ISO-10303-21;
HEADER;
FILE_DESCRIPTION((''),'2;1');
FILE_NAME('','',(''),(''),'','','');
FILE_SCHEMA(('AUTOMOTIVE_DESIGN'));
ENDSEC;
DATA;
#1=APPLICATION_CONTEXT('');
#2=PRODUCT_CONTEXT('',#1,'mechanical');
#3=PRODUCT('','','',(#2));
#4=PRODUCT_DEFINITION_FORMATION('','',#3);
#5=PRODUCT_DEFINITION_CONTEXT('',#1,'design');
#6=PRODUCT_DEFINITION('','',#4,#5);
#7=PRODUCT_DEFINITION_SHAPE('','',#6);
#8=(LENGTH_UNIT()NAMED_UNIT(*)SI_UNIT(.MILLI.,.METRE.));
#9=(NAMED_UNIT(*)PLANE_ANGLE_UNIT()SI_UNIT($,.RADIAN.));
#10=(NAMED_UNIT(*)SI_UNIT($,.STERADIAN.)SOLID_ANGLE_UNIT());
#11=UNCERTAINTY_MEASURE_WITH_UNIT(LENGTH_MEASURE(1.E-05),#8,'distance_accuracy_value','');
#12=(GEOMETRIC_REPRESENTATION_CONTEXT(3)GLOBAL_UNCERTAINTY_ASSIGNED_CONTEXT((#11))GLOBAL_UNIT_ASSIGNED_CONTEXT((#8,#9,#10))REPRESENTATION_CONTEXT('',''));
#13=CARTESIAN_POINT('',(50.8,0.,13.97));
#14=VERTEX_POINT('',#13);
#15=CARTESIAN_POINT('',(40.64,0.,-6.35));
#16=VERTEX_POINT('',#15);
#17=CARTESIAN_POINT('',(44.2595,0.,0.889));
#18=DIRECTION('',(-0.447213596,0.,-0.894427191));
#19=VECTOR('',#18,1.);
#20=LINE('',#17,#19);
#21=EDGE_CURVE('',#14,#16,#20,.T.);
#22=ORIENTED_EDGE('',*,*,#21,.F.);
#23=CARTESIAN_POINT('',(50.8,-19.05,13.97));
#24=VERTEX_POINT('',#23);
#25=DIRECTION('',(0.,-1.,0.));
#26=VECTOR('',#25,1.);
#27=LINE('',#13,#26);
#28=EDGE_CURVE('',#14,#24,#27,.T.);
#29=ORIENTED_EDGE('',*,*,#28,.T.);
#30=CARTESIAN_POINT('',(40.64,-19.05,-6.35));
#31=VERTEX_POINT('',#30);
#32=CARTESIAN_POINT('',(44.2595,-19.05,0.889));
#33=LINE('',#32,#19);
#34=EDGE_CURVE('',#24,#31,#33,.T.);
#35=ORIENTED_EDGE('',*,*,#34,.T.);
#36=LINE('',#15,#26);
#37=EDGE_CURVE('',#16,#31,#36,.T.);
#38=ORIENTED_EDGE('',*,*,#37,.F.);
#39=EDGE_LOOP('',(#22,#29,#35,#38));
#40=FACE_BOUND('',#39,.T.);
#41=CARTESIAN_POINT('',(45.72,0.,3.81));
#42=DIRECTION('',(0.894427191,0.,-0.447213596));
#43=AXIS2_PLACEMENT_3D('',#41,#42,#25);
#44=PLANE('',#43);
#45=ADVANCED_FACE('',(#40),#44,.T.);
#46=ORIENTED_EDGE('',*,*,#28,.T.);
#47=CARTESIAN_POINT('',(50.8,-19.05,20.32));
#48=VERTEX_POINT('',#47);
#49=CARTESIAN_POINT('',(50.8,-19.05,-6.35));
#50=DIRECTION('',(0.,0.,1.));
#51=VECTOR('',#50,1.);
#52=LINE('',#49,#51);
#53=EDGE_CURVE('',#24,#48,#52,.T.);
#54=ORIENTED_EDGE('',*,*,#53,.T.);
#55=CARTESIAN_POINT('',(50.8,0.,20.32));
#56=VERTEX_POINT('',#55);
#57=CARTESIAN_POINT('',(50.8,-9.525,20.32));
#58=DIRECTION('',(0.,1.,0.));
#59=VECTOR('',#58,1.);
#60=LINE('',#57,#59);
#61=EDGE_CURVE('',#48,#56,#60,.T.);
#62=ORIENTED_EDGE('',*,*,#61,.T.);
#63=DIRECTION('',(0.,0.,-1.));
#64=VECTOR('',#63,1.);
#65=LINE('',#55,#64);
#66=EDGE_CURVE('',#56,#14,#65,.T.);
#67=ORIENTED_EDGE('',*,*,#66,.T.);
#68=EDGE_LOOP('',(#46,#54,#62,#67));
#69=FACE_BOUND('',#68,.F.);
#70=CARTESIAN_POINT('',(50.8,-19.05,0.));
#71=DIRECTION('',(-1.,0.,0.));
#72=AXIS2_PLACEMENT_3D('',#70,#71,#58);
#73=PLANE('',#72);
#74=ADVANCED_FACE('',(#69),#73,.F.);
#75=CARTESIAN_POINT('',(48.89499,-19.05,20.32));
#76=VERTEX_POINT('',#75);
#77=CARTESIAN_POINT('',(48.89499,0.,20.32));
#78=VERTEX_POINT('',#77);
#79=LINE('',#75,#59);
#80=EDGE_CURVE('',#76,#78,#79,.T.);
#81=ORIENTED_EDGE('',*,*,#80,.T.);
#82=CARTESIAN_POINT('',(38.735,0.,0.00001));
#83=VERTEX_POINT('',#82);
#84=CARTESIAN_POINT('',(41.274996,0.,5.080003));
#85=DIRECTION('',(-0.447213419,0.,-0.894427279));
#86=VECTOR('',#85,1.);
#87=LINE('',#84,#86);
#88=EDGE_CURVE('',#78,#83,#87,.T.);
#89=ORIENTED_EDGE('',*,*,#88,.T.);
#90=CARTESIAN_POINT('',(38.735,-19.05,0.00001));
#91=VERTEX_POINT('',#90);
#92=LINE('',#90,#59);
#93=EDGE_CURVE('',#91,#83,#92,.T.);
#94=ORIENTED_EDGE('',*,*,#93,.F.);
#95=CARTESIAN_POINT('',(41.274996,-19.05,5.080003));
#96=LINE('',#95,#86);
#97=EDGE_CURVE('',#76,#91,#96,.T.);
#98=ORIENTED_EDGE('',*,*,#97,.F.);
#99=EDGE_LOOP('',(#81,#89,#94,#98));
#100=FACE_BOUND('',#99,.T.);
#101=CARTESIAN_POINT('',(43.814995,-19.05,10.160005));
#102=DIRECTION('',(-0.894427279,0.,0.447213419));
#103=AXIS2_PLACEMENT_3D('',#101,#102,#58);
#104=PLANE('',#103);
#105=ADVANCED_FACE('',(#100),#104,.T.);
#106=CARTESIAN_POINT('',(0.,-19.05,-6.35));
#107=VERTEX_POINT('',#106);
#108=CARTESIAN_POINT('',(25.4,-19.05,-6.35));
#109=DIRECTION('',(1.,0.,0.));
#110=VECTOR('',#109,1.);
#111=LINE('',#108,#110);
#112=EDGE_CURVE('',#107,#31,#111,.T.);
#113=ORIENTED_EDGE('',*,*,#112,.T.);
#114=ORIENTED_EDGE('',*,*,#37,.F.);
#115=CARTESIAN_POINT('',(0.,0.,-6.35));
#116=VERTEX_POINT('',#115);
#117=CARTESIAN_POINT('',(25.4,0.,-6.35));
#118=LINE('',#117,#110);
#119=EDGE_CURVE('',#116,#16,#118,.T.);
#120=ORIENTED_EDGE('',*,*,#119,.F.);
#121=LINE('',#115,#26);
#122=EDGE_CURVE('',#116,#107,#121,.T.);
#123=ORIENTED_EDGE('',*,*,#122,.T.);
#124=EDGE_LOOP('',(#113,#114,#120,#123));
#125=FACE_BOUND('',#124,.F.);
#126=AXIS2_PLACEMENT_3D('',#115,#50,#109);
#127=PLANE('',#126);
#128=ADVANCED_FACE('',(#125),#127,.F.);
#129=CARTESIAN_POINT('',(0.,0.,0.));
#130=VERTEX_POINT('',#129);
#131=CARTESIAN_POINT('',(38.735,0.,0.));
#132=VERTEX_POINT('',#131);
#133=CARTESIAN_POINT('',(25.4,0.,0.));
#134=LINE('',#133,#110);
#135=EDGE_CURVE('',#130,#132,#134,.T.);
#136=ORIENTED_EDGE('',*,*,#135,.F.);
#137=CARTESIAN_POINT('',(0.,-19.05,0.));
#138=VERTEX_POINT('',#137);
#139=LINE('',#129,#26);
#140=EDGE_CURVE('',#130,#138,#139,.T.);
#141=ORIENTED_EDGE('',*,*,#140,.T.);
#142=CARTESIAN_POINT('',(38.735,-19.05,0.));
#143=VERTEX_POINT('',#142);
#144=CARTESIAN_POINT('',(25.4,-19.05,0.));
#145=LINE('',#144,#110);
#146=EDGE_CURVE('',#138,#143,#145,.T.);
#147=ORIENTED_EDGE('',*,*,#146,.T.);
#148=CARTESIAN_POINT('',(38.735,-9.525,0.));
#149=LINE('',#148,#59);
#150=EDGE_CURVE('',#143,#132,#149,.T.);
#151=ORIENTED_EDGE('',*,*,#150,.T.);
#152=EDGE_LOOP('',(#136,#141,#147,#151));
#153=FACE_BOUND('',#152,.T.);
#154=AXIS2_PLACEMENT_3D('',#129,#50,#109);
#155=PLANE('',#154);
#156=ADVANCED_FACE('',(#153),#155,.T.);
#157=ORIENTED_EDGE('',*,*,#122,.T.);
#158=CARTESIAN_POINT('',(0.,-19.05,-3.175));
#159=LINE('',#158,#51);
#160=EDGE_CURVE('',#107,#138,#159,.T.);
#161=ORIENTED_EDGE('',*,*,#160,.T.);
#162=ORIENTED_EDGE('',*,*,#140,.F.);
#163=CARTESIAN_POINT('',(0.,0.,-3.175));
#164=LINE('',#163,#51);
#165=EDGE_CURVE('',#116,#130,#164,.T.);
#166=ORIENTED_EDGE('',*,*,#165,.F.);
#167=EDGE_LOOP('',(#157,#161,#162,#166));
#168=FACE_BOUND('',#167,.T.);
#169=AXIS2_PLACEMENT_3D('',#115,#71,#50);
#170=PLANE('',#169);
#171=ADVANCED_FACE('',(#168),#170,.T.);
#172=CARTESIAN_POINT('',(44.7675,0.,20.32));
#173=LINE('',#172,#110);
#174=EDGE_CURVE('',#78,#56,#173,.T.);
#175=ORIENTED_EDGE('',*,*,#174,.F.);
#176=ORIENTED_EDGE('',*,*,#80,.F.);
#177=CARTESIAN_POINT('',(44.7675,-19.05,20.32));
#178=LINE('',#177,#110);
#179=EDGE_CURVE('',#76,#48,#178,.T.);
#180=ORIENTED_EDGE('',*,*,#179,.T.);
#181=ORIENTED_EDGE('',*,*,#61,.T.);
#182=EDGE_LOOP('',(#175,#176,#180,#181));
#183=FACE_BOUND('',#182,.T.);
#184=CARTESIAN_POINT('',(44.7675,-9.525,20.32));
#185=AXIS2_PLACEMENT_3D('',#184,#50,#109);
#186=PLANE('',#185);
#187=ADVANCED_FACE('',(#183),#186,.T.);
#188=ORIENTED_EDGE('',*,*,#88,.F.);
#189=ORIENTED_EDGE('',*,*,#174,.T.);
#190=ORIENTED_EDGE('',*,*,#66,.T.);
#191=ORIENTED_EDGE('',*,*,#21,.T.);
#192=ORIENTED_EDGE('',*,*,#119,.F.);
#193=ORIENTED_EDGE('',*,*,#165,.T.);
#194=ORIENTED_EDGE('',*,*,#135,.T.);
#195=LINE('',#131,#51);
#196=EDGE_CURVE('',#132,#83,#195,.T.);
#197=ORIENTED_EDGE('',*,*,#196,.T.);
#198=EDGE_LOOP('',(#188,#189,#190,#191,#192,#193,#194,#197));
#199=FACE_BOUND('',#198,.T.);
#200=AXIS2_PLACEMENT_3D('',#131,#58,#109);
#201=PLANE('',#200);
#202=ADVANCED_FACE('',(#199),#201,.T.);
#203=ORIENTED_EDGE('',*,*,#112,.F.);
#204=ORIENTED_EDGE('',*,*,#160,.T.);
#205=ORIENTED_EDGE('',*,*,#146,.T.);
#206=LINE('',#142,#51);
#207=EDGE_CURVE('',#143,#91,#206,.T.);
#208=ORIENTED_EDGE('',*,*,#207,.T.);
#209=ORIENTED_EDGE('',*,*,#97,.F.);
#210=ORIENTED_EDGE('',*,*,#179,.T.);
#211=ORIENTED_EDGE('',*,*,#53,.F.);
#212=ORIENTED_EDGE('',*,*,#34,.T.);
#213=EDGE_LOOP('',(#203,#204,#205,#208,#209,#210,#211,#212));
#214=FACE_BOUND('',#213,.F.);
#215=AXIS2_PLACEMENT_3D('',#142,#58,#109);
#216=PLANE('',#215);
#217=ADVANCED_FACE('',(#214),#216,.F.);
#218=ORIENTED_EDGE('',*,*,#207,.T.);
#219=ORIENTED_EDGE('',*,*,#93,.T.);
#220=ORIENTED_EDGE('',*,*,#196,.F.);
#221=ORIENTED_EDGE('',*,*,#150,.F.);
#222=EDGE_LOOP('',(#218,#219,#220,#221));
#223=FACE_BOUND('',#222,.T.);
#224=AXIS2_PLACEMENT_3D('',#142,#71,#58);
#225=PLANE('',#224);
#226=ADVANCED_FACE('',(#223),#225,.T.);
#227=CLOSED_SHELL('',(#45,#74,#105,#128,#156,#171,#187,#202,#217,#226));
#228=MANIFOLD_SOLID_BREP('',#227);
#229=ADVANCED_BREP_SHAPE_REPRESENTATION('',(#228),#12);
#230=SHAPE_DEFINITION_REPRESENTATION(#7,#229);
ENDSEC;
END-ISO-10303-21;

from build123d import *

# Parameters (mm, degrees)
F0_W     = 50.8
F0_H     = 6.35
F1_DEPTH = 19.05
F2_W     = 12.065
F2_H     = 19.05
F3_DEPTH = 20.32
F4_SIZE2 = 10.16
F4_SIZE  = 20.32
F5_SIZE2 = 20.31999
F5_SIZE  = 10.15999


# Not quite as in the source:
# - a fillet or chamfer is up to 0.001 mm smaller than in the source, because OpenCascade refuses the exact size


with BuildPart() as f1:
    # F0 (on Front) → F1 (new body)
    with BuildSketch(Plane.XZ):
        with Locations((25.4, -3.175)):
            Rectangle(F0_W, F0_H)
    extrude(amount=F1_DEPTH)

    # F2 (on face) → F3 (join)
    with BuildSketch(Plane.XY):
        with Locations((44.7675, -9.525)):
            Rectangle(F2_W, F2_H)
    extrude(amount=F3_DEPTH)

    # F4
    f4_edges = [f1.edges().sort_by_distance(p)[0] for p in [
        (50.8, -9.525, -6.35),
    ]]
    f4_side = f1.faces().sort_by_distance((50.8, -9.525, 6.985))[0]
    chamfer(f4_edges, length=F4_SIZE, length2=F4_SIZE2, reference=f4_side)

    # F5 (size 10.16 and 20.32 in the source; OpenCascade refuses exactly that, so slightly less here)
    f5_edges = [f1.edges().sort_by_distance(p)[0] for p in [
        (38.735, -9.525, 20.32),
    ]]
    f5_side = f1.faces().sort_by_distance((44.7675, -9.525, 20.32))[0]
    chamfer(f5_edges, length=F5_SIZE, length2=F5_SIZE2, reference=f5_side)


solid = f1.part
